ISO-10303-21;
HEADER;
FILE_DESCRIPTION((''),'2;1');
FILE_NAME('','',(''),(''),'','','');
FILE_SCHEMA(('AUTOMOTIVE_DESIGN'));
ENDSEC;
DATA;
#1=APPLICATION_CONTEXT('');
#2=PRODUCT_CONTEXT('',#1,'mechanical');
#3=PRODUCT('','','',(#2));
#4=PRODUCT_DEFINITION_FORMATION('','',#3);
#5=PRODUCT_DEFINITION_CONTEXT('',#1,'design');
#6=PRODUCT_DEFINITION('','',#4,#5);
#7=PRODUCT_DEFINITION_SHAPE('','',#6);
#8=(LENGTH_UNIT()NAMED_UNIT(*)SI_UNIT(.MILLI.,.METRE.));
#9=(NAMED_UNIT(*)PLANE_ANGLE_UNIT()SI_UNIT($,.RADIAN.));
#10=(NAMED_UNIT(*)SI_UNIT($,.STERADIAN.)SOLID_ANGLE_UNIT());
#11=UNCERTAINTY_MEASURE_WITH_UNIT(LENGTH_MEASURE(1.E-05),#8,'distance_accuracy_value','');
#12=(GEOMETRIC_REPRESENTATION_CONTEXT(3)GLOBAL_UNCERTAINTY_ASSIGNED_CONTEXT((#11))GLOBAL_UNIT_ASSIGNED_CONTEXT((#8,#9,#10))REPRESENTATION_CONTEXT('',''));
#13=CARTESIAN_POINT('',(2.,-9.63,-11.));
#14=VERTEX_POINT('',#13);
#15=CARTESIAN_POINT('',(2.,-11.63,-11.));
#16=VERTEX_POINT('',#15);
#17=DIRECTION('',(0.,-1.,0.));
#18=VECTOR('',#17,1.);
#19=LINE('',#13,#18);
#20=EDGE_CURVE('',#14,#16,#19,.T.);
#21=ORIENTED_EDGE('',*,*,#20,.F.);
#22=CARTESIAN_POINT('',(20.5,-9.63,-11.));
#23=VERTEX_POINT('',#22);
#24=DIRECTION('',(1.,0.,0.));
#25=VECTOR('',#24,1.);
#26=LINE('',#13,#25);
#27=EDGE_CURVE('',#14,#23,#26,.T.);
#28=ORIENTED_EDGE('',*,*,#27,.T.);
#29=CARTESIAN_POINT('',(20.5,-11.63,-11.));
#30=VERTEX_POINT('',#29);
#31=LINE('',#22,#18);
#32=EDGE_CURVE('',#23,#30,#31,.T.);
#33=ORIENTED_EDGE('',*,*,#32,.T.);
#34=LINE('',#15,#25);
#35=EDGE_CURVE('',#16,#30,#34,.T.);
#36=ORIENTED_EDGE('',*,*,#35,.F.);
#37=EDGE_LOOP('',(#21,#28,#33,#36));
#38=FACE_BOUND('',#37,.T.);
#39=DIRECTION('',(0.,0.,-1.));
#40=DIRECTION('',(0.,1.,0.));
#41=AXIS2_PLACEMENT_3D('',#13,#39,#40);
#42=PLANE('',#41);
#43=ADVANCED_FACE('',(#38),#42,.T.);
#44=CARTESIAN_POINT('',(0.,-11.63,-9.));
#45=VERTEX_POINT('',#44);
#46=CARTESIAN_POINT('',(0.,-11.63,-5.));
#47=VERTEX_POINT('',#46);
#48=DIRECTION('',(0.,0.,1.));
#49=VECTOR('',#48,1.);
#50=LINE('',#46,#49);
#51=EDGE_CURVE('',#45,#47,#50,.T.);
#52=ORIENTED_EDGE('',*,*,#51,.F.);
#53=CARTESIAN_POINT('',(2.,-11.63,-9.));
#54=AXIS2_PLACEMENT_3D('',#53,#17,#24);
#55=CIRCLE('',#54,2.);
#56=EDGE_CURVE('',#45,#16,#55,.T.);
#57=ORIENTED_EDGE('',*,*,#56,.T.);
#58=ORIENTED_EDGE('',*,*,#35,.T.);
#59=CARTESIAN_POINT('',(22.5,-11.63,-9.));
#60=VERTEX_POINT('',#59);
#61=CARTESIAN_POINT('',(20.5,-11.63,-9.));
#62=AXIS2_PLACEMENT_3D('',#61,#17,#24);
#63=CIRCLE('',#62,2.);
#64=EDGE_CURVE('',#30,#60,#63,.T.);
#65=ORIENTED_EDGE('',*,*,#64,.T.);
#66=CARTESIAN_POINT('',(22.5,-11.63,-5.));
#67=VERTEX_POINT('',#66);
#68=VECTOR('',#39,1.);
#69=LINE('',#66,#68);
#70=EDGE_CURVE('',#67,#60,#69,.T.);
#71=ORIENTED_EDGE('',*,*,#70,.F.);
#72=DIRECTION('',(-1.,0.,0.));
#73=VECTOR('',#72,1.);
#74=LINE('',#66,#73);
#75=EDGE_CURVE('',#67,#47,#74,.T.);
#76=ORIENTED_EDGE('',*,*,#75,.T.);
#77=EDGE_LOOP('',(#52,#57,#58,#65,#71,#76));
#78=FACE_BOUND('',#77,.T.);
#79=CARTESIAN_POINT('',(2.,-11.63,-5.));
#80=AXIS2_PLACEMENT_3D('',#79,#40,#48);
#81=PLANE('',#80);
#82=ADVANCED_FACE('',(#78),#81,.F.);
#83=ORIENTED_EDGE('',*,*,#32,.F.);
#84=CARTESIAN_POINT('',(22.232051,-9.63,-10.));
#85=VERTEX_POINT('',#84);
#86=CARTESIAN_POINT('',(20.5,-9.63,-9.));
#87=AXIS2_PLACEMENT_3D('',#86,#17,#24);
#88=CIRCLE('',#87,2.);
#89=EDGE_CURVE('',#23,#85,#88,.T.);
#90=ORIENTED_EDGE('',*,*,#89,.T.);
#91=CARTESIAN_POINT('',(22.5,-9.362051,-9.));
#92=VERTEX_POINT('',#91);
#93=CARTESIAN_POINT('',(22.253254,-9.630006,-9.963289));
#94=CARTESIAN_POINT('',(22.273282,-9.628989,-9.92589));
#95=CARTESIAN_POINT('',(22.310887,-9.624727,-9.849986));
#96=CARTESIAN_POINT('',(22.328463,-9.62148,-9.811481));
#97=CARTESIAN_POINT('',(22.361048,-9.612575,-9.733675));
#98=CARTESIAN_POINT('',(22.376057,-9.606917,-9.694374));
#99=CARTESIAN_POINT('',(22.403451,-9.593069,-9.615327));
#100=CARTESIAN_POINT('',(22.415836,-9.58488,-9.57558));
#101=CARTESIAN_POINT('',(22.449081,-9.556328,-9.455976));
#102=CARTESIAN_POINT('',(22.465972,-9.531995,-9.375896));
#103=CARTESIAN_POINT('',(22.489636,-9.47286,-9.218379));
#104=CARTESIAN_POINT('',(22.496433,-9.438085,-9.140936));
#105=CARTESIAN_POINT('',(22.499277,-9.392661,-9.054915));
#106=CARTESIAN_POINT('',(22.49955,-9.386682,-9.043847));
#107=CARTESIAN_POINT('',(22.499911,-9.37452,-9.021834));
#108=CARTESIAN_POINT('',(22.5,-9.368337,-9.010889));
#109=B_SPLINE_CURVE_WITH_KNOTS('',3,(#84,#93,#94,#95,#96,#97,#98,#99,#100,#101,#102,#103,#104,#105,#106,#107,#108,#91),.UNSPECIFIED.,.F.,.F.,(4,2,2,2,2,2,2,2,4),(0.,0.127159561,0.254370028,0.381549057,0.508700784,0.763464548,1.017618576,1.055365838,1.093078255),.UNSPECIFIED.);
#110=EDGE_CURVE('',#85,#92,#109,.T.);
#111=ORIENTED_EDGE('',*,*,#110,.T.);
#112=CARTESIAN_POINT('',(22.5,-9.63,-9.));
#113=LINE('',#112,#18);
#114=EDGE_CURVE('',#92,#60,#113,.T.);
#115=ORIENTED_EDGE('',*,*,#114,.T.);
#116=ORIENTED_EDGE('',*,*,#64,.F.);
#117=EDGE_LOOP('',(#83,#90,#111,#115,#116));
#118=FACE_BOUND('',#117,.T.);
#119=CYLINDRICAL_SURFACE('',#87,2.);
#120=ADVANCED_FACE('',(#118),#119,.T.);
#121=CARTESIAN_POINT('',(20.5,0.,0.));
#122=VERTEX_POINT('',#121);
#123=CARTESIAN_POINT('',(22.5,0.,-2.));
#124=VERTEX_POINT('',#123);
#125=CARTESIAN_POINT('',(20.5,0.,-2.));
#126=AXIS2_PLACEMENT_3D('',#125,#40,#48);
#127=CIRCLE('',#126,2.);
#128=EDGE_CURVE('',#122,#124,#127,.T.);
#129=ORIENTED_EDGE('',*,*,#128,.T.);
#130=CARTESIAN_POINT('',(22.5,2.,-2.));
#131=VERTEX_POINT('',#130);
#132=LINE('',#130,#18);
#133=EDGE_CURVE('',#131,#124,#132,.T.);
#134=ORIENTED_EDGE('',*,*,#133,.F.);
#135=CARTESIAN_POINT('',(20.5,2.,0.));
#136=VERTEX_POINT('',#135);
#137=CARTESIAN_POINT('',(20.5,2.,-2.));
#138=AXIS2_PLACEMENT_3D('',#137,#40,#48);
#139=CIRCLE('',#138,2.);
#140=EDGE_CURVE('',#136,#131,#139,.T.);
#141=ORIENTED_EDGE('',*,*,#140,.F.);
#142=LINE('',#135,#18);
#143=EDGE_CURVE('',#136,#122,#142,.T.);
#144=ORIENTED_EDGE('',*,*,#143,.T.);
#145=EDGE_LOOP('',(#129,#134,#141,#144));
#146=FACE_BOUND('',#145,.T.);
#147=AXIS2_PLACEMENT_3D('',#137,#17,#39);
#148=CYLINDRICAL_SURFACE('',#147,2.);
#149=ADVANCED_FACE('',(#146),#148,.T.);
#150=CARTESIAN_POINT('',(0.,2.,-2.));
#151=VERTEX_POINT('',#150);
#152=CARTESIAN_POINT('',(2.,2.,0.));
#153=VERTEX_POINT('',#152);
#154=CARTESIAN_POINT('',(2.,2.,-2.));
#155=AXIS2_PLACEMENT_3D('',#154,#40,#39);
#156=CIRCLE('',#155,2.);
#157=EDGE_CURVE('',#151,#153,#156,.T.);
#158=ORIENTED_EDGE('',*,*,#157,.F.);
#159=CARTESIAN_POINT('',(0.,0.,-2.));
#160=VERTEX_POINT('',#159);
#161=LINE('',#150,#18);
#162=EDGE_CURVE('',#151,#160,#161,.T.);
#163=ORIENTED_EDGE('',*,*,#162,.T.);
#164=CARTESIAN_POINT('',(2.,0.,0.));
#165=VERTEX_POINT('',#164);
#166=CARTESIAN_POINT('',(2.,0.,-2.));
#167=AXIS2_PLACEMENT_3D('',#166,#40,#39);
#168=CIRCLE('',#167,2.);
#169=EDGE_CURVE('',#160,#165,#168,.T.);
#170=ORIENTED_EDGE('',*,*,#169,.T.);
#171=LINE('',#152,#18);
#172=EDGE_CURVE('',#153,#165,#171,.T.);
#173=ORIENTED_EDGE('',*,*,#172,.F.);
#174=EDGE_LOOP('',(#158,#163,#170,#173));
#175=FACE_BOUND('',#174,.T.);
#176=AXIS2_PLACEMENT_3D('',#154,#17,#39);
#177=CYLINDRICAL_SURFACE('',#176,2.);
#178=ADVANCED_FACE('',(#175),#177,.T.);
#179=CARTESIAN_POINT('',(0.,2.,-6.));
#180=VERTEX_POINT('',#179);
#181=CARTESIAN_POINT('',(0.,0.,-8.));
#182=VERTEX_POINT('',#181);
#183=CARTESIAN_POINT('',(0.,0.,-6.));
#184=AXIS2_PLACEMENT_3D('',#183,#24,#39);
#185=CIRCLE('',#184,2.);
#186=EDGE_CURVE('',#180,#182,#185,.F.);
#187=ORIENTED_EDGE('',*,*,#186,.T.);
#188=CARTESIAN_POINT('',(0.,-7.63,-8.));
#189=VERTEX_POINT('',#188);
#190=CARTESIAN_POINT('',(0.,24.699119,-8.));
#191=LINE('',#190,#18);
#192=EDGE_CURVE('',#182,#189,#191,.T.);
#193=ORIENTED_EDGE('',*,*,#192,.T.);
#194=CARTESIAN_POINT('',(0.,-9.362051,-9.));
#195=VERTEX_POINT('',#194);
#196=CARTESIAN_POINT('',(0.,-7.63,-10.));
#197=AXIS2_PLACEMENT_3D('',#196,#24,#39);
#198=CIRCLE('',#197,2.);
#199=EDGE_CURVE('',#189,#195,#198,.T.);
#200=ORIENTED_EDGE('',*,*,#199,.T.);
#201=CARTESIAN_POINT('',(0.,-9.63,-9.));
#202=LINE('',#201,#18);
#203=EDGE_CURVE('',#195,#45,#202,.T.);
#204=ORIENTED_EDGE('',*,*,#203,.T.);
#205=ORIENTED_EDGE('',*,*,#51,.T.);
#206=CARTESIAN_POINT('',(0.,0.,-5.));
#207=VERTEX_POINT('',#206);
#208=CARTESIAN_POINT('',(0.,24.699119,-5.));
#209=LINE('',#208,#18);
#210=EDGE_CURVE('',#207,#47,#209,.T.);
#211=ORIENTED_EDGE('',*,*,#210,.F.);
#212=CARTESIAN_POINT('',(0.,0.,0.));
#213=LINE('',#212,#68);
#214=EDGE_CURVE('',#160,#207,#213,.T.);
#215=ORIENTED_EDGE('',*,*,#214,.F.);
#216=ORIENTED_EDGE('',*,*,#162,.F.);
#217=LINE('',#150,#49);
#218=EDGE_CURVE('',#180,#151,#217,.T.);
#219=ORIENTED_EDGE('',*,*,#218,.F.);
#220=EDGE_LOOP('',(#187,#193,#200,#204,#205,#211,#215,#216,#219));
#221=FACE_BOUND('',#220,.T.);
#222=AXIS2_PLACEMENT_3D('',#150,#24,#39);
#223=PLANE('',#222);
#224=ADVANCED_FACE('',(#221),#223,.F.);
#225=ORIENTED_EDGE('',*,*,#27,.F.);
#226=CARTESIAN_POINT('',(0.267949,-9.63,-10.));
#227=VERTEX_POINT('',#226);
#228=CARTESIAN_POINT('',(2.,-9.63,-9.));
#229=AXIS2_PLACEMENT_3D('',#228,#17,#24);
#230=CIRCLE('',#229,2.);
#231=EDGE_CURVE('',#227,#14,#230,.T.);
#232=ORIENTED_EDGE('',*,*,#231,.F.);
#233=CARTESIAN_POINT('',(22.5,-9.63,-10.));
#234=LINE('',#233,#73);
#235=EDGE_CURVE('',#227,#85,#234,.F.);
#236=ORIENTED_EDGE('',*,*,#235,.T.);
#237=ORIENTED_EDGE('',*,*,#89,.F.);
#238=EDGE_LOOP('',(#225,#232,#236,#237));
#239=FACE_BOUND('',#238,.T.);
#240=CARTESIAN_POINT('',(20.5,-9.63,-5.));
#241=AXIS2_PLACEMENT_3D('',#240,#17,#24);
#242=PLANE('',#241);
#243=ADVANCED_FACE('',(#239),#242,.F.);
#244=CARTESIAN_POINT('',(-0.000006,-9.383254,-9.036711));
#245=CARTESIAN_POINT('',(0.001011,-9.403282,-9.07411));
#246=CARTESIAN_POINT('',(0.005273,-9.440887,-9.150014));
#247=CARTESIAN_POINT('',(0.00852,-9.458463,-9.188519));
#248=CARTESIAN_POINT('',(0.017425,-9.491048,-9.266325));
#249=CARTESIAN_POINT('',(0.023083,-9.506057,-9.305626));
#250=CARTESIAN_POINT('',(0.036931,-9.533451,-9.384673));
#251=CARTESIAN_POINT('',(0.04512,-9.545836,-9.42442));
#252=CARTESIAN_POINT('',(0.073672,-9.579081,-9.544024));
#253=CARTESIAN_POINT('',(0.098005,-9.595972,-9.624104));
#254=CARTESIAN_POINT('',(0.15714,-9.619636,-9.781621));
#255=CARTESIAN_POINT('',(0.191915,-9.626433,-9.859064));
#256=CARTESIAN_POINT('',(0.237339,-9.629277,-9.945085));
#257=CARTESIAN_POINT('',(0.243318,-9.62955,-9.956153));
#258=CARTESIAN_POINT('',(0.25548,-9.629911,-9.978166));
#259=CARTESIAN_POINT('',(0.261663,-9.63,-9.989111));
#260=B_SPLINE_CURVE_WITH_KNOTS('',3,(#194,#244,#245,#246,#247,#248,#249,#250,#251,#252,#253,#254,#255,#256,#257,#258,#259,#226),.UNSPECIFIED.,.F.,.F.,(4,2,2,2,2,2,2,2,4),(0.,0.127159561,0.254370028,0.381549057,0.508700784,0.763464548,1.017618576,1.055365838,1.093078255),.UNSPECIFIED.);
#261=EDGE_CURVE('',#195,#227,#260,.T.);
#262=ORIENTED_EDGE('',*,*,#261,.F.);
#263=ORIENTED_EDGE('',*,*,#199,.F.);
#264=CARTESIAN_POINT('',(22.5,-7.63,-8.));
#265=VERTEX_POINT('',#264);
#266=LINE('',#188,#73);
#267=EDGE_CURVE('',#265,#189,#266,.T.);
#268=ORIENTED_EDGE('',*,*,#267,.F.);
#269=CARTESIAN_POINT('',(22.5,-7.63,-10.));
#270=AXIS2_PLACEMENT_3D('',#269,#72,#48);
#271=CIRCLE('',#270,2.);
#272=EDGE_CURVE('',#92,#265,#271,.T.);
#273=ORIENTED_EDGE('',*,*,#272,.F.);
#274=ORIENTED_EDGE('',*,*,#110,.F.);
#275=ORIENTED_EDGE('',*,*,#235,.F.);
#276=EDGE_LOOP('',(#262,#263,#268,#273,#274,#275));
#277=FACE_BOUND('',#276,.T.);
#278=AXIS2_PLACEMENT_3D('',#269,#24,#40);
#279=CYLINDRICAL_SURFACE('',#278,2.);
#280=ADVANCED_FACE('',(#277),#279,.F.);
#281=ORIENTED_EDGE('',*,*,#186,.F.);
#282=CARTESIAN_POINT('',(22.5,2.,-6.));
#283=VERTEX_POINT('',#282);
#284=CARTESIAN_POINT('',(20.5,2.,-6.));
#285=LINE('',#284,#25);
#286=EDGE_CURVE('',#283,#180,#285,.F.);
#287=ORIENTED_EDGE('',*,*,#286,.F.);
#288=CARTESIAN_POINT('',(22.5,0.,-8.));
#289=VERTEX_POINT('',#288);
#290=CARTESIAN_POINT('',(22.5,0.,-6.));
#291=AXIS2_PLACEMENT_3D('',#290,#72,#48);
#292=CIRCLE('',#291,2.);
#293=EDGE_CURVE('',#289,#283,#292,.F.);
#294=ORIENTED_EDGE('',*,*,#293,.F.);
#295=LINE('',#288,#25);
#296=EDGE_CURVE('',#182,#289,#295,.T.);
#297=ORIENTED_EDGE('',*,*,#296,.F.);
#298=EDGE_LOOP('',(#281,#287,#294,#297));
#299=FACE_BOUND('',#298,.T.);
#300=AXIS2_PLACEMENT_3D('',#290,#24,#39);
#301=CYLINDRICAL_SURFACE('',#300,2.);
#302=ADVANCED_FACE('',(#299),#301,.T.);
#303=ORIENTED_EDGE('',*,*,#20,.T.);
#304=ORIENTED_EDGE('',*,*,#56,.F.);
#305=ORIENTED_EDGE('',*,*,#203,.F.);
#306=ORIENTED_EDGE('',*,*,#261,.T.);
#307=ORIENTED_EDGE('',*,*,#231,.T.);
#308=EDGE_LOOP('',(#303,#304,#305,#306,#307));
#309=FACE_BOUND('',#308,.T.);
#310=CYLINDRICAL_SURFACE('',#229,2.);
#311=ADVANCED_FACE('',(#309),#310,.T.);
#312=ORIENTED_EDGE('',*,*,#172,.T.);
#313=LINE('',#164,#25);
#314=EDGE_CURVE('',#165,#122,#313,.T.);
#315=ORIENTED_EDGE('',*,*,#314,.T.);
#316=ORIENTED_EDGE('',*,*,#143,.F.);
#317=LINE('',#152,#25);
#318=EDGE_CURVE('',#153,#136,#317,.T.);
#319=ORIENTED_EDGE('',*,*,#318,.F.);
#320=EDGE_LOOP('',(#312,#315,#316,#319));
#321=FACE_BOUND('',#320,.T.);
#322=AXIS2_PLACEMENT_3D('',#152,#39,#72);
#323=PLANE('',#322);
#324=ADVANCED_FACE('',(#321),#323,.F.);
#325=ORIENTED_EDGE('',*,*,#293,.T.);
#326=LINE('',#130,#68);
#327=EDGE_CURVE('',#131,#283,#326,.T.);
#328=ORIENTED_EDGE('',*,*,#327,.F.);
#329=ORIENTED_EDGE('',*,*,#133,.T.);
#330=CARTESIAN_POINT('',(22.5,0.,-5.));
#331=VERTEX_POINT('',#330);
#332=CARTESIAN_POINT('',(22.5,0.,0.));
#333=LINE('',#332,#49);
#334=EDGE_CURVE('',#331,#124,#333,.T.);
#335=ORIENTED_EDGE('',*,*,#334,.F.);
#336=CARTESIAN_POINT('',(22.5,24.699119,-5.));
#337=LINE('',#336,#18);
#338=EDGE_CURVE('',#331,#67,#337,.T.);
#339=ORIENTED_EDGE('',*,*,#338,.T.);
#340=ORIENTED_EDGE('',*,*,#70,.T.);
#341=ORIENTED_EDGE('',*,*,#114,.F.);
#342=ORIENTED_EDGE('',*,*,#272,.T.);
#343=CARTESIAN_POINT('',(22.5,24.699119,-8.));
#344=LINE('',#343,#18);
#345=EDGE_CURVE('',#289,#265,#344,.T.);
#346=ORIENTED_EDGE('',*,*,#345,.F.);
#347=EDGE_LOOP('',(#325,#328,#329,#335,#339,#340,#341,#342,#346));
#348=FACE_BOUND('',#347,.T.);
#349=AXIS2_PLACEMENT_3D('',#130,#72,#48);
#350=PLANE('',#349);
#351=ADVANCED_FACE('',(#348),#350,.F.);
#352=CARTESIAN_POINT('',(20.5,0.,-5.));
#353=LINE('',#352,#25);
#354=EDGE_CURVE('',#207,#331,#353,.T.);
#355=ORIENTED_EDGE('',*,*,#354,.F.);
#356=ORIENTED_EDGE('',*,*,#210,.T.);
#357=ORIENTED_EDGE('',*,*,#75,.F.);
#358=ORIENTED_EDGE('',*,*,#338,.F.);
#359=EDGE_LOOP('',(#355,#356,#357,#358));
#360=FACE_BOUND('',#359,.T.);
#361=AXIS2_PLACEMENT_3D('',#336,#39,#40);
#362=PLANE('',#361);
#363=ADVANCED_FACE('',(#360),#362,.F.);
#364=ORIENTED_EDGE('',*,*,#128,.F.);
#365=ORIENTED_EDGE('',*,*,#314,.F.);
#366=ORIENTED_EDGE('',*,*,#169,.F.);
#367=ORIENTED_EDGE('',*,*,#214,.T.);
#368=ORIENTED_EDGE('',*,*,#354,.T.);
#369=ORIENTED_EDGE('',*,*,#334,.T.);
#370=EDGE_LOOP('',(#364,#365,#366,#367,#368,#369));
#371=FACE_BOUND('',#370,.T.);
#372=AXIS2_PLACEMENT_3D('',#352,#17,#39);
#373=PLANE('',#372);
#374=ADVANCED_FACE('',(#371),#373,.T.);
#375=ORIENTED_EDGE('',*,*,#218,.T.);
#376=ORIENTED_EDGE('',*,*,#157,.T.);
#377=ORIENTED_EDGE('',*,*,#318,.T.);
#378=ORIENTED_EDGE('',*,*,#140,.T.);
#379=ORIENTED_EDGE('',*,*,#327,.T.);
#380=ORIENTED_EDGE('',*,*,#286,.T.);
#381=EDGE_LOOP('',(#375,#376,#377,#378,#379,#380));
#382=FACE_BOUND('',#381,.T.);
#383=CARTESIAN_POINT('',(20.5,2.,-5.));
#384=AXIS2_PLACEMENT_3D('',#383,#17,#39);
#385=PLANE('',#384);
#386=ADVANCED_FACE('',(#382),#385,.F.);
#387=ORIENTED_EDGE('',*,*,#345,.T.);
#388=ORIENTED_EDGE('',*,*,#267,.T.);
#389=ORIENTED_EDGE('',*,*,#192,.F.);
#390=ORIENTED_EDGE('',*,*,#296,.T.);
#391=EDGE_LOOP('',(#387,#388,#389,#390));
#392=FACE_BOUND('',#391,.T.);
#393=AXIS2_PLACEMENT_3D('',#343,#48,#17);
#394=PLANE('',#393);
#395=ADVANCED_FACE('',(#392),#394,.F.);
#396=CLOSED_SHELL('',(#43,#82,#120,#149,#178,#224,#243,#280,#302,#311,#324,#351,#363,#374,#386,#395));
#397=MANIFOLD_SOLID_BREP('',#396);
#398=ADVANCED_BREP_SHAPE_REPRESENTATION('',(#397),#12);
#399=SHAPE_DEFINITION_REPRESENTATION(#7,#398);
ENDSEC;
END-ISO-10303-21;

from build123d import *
from build123d.topology import SkipClean

# Parameters (mm, degrees)
BOSS_EXTRUDE1_DEPTH             = 2
BOSS_EXTRUDE2_START             = -13.63
BOSS_EXTRUDE2_DEPTH             = 13.63
BOSS_EXTRUDE3_DEPTH             = 2
SKETCH5_W                       = 22.5
SKETCH5_H                       = 6.1
CUT_EXTRUDE1_DEPTH              = 28.613527482
BOSS_EXTRUDE4_REACH             = 29.614
SKETCH6_W                       = 22.5
SKETCH6_H                       = 3
BOSS_EXTRUDE4_DIRECTION_2_REACH = 29.614
FILLET1_R                       = 2


with BuildPart() as part:
    # Sketch1 → Boss-Extrude1 (new body)
    with BuildSketch(Plane(origin=(0, 0, 0), x_dir=(1, 0, 0), z_dir=(0, 1, 0))):
        with BuildLine():
            Line((2, 0), (20.5, 0))
            ThreePointArc((20.5, 0), (21.914213562, 0.585786438), (22.5, 2))
            Line((22.5, 2), (22.5, 5))
            ThreePointArc((22.5, 5), (21.914213562, 6.414213562), (20.5, 7))
            Line((20.5, 7), (2, 7))
            ThreePointArc((2, 7), (0.585786438, 6.414213562), (0, 5))
            Line((0, 5), (0, 2))
            ThreePointArc((0, 2), (0.585786438, 0.585786438), (2, 0))
        make_face()
    extrude(amount=BOSS_EXTRUDE1_DEPTH)

    # Sketch2 → Boss-Extrude2 (add)
    with SkipClean():  # the faces are left unmerged after this step: merging them gives an invalid solid
        with BuildSketch(Plane(origin=(0, 2, 0), x_dir=(1, 0, 0), z_dir=(0, 1, 0)).offset(BOSS_EXTRUDE2_START)):
            with BuildLine():
                Line((22.5, 5), (22.5, 2))
                ThreePointArc((22.5, 2), (22.202938637, 0.951191152), (21.4, 0.21394289))
                Line((21.4, 0.21394289), (21.4, 3.1))
                ThreePointArc((21.4, 3.1), (20.521320344, 5.221320344), (18.4, 6.1))
                Line((18.4, 6.1), (4.1, 6.1))
                ThreePointArc((4.1, 6.1), (1.978679656, 5.221320344), (1.1, 3.1))
                Line((1.1, 3.1), (1.1, 0.21394289))
                ThreePointArc((1.1, 0.21394289), (0.297061363, 0.951191152), (0, 2))
                Line((0, 2), (0, 5))
                ThreePointArc((0, 5), (0.585786438, 6.414213562), (2, 7))
                Line((2, 7), (20.5, 7))
                ThreePointArc((20.5, 7), (21.914213562, 6.414213562), (22.5, 5))
            make_face()
        extrude(amount=BOSS_EXTRUDE2_DEPTH)
    add(part.part.scale(1), mode=Mode.REPLACE)  # the faces are merged on a copy

    # Sketch4 → Boss-Extrude3 (add)
    with BuildSketch(Plane.XZ.offset(11.63)):
        with BuildLine():
            Line((20.5, -7), (2, -7))
            ThreePointArc((2, -7), (0.585786438, -6.414213562), (0, -5))
            Line((0, -5), (0, -9))
            ThreePointArc((0, -9), (0.585786438, -10.414213562), (2, -11))
            Line((2, -11), (20.5, -11))
            ThreePointArc((20.5, -11), (21.914213562, -10.414213562), (22.5, -9))
            Line((22.5, -9), (22.5, -5))
            ThreePointArc((22.5, -5), (21.914213562, -6.414213562), (20.5, -7))
        make_face()
    extrude(amount=-BOSS_EXTRUDE3_DEPTH)

    # Sketch5 → Cut-Extrude1 (cut, through all)
    with BuildSketch(Plane.XZ):
        with Locations((11.25, -3.05)):
            Rectangle(SKETCH5_W, SKETCH5_H)
    extrude(amount=CUT_EXTRUDE1_DEPTH, mode=Mode.SUBTRACT)

    # Boss-Extrude4: up to this face of the body (flat: up to its plane)
    boss_extrude4_end = Plane(part.part.faces().sort_by_distance((11.25, 2, -3.5))[0])
    # Sketch6 → Boss-Extrude4 (add, up to the picked face)
    with BuildSketch(Plane(origin=(0, -9.63, 0), x_dir=(1, 0, 0), z_dir=(0, 1, 0)), mode=Mode.PRIVATE) as boss_extrude4_sk1:
        with Locations((11.25, 6.5)):
            Rectangle(SKETCH6_W, SKETCH6_H)
    boss_extrude4_tool1 = split(extrude(boss_extrude4_sk1.sketch, amount=BOSS_EXTRUDE4_REACH, mode=Mode.PRIVATE), bisect_by=boss_extrude4_end, keep=Keep.BOTH, mode=Mode.PRIVATE)
    add(boss_extrude4_tool1.solids().sort_by(Axis((11.25, -9.63, -6.5), (0, 1, 0)))[0])

    # Boss-Extrude4 direction 2: up to this face of the body (flat: up to its plane)
    boss_extrude4_direction_2_end = Plane(part.part.faces().sort_by_distance((11.25, -11.63, -8.518311689))[0])
    # Sketch6 → Boss-Extrude4 direction 2 (add, up to the picked face)
    with BuildSketch(Plane(origin=(0, -9.63, 0), x_dir=(1, 0, 0), z_dir=(0, 1, 0)), mode=Mode.PRIVATE) as boss_extrude4_direction_2_sk1:
        with Locations((11.25, 6.5)):
            Rectangle(SKETCH6_W, SKETCH6_H)
    boss_extrude4_direction_2_tool1 = split(extrude(boss_extrude4_direction_2_sk1.sketch, amount=-BOSS_EXTRUDE4_DIRECTION_2_REACH, mode=Mode.PRIVATE), bisect_by=boss_extrude4_direction_2_end, keep=Keep.BOTH, mode=Mode.PRIVATE)
    add(boss_extrude4_direction_2_tool1.solids().sort_by(Axis((11.25, -9.63, -6.5), (0, -1, 0)))[0])

    # Fillet1
    fillet1_edges = [part.edges().sort_by_distance(p)[0] for p in [
        (11.25, -9.63, -8),
        (11.25, 2, -8),
    ]]
    fillet(fillet1_edges, radius=FILLET1_R)


solid = part.part
